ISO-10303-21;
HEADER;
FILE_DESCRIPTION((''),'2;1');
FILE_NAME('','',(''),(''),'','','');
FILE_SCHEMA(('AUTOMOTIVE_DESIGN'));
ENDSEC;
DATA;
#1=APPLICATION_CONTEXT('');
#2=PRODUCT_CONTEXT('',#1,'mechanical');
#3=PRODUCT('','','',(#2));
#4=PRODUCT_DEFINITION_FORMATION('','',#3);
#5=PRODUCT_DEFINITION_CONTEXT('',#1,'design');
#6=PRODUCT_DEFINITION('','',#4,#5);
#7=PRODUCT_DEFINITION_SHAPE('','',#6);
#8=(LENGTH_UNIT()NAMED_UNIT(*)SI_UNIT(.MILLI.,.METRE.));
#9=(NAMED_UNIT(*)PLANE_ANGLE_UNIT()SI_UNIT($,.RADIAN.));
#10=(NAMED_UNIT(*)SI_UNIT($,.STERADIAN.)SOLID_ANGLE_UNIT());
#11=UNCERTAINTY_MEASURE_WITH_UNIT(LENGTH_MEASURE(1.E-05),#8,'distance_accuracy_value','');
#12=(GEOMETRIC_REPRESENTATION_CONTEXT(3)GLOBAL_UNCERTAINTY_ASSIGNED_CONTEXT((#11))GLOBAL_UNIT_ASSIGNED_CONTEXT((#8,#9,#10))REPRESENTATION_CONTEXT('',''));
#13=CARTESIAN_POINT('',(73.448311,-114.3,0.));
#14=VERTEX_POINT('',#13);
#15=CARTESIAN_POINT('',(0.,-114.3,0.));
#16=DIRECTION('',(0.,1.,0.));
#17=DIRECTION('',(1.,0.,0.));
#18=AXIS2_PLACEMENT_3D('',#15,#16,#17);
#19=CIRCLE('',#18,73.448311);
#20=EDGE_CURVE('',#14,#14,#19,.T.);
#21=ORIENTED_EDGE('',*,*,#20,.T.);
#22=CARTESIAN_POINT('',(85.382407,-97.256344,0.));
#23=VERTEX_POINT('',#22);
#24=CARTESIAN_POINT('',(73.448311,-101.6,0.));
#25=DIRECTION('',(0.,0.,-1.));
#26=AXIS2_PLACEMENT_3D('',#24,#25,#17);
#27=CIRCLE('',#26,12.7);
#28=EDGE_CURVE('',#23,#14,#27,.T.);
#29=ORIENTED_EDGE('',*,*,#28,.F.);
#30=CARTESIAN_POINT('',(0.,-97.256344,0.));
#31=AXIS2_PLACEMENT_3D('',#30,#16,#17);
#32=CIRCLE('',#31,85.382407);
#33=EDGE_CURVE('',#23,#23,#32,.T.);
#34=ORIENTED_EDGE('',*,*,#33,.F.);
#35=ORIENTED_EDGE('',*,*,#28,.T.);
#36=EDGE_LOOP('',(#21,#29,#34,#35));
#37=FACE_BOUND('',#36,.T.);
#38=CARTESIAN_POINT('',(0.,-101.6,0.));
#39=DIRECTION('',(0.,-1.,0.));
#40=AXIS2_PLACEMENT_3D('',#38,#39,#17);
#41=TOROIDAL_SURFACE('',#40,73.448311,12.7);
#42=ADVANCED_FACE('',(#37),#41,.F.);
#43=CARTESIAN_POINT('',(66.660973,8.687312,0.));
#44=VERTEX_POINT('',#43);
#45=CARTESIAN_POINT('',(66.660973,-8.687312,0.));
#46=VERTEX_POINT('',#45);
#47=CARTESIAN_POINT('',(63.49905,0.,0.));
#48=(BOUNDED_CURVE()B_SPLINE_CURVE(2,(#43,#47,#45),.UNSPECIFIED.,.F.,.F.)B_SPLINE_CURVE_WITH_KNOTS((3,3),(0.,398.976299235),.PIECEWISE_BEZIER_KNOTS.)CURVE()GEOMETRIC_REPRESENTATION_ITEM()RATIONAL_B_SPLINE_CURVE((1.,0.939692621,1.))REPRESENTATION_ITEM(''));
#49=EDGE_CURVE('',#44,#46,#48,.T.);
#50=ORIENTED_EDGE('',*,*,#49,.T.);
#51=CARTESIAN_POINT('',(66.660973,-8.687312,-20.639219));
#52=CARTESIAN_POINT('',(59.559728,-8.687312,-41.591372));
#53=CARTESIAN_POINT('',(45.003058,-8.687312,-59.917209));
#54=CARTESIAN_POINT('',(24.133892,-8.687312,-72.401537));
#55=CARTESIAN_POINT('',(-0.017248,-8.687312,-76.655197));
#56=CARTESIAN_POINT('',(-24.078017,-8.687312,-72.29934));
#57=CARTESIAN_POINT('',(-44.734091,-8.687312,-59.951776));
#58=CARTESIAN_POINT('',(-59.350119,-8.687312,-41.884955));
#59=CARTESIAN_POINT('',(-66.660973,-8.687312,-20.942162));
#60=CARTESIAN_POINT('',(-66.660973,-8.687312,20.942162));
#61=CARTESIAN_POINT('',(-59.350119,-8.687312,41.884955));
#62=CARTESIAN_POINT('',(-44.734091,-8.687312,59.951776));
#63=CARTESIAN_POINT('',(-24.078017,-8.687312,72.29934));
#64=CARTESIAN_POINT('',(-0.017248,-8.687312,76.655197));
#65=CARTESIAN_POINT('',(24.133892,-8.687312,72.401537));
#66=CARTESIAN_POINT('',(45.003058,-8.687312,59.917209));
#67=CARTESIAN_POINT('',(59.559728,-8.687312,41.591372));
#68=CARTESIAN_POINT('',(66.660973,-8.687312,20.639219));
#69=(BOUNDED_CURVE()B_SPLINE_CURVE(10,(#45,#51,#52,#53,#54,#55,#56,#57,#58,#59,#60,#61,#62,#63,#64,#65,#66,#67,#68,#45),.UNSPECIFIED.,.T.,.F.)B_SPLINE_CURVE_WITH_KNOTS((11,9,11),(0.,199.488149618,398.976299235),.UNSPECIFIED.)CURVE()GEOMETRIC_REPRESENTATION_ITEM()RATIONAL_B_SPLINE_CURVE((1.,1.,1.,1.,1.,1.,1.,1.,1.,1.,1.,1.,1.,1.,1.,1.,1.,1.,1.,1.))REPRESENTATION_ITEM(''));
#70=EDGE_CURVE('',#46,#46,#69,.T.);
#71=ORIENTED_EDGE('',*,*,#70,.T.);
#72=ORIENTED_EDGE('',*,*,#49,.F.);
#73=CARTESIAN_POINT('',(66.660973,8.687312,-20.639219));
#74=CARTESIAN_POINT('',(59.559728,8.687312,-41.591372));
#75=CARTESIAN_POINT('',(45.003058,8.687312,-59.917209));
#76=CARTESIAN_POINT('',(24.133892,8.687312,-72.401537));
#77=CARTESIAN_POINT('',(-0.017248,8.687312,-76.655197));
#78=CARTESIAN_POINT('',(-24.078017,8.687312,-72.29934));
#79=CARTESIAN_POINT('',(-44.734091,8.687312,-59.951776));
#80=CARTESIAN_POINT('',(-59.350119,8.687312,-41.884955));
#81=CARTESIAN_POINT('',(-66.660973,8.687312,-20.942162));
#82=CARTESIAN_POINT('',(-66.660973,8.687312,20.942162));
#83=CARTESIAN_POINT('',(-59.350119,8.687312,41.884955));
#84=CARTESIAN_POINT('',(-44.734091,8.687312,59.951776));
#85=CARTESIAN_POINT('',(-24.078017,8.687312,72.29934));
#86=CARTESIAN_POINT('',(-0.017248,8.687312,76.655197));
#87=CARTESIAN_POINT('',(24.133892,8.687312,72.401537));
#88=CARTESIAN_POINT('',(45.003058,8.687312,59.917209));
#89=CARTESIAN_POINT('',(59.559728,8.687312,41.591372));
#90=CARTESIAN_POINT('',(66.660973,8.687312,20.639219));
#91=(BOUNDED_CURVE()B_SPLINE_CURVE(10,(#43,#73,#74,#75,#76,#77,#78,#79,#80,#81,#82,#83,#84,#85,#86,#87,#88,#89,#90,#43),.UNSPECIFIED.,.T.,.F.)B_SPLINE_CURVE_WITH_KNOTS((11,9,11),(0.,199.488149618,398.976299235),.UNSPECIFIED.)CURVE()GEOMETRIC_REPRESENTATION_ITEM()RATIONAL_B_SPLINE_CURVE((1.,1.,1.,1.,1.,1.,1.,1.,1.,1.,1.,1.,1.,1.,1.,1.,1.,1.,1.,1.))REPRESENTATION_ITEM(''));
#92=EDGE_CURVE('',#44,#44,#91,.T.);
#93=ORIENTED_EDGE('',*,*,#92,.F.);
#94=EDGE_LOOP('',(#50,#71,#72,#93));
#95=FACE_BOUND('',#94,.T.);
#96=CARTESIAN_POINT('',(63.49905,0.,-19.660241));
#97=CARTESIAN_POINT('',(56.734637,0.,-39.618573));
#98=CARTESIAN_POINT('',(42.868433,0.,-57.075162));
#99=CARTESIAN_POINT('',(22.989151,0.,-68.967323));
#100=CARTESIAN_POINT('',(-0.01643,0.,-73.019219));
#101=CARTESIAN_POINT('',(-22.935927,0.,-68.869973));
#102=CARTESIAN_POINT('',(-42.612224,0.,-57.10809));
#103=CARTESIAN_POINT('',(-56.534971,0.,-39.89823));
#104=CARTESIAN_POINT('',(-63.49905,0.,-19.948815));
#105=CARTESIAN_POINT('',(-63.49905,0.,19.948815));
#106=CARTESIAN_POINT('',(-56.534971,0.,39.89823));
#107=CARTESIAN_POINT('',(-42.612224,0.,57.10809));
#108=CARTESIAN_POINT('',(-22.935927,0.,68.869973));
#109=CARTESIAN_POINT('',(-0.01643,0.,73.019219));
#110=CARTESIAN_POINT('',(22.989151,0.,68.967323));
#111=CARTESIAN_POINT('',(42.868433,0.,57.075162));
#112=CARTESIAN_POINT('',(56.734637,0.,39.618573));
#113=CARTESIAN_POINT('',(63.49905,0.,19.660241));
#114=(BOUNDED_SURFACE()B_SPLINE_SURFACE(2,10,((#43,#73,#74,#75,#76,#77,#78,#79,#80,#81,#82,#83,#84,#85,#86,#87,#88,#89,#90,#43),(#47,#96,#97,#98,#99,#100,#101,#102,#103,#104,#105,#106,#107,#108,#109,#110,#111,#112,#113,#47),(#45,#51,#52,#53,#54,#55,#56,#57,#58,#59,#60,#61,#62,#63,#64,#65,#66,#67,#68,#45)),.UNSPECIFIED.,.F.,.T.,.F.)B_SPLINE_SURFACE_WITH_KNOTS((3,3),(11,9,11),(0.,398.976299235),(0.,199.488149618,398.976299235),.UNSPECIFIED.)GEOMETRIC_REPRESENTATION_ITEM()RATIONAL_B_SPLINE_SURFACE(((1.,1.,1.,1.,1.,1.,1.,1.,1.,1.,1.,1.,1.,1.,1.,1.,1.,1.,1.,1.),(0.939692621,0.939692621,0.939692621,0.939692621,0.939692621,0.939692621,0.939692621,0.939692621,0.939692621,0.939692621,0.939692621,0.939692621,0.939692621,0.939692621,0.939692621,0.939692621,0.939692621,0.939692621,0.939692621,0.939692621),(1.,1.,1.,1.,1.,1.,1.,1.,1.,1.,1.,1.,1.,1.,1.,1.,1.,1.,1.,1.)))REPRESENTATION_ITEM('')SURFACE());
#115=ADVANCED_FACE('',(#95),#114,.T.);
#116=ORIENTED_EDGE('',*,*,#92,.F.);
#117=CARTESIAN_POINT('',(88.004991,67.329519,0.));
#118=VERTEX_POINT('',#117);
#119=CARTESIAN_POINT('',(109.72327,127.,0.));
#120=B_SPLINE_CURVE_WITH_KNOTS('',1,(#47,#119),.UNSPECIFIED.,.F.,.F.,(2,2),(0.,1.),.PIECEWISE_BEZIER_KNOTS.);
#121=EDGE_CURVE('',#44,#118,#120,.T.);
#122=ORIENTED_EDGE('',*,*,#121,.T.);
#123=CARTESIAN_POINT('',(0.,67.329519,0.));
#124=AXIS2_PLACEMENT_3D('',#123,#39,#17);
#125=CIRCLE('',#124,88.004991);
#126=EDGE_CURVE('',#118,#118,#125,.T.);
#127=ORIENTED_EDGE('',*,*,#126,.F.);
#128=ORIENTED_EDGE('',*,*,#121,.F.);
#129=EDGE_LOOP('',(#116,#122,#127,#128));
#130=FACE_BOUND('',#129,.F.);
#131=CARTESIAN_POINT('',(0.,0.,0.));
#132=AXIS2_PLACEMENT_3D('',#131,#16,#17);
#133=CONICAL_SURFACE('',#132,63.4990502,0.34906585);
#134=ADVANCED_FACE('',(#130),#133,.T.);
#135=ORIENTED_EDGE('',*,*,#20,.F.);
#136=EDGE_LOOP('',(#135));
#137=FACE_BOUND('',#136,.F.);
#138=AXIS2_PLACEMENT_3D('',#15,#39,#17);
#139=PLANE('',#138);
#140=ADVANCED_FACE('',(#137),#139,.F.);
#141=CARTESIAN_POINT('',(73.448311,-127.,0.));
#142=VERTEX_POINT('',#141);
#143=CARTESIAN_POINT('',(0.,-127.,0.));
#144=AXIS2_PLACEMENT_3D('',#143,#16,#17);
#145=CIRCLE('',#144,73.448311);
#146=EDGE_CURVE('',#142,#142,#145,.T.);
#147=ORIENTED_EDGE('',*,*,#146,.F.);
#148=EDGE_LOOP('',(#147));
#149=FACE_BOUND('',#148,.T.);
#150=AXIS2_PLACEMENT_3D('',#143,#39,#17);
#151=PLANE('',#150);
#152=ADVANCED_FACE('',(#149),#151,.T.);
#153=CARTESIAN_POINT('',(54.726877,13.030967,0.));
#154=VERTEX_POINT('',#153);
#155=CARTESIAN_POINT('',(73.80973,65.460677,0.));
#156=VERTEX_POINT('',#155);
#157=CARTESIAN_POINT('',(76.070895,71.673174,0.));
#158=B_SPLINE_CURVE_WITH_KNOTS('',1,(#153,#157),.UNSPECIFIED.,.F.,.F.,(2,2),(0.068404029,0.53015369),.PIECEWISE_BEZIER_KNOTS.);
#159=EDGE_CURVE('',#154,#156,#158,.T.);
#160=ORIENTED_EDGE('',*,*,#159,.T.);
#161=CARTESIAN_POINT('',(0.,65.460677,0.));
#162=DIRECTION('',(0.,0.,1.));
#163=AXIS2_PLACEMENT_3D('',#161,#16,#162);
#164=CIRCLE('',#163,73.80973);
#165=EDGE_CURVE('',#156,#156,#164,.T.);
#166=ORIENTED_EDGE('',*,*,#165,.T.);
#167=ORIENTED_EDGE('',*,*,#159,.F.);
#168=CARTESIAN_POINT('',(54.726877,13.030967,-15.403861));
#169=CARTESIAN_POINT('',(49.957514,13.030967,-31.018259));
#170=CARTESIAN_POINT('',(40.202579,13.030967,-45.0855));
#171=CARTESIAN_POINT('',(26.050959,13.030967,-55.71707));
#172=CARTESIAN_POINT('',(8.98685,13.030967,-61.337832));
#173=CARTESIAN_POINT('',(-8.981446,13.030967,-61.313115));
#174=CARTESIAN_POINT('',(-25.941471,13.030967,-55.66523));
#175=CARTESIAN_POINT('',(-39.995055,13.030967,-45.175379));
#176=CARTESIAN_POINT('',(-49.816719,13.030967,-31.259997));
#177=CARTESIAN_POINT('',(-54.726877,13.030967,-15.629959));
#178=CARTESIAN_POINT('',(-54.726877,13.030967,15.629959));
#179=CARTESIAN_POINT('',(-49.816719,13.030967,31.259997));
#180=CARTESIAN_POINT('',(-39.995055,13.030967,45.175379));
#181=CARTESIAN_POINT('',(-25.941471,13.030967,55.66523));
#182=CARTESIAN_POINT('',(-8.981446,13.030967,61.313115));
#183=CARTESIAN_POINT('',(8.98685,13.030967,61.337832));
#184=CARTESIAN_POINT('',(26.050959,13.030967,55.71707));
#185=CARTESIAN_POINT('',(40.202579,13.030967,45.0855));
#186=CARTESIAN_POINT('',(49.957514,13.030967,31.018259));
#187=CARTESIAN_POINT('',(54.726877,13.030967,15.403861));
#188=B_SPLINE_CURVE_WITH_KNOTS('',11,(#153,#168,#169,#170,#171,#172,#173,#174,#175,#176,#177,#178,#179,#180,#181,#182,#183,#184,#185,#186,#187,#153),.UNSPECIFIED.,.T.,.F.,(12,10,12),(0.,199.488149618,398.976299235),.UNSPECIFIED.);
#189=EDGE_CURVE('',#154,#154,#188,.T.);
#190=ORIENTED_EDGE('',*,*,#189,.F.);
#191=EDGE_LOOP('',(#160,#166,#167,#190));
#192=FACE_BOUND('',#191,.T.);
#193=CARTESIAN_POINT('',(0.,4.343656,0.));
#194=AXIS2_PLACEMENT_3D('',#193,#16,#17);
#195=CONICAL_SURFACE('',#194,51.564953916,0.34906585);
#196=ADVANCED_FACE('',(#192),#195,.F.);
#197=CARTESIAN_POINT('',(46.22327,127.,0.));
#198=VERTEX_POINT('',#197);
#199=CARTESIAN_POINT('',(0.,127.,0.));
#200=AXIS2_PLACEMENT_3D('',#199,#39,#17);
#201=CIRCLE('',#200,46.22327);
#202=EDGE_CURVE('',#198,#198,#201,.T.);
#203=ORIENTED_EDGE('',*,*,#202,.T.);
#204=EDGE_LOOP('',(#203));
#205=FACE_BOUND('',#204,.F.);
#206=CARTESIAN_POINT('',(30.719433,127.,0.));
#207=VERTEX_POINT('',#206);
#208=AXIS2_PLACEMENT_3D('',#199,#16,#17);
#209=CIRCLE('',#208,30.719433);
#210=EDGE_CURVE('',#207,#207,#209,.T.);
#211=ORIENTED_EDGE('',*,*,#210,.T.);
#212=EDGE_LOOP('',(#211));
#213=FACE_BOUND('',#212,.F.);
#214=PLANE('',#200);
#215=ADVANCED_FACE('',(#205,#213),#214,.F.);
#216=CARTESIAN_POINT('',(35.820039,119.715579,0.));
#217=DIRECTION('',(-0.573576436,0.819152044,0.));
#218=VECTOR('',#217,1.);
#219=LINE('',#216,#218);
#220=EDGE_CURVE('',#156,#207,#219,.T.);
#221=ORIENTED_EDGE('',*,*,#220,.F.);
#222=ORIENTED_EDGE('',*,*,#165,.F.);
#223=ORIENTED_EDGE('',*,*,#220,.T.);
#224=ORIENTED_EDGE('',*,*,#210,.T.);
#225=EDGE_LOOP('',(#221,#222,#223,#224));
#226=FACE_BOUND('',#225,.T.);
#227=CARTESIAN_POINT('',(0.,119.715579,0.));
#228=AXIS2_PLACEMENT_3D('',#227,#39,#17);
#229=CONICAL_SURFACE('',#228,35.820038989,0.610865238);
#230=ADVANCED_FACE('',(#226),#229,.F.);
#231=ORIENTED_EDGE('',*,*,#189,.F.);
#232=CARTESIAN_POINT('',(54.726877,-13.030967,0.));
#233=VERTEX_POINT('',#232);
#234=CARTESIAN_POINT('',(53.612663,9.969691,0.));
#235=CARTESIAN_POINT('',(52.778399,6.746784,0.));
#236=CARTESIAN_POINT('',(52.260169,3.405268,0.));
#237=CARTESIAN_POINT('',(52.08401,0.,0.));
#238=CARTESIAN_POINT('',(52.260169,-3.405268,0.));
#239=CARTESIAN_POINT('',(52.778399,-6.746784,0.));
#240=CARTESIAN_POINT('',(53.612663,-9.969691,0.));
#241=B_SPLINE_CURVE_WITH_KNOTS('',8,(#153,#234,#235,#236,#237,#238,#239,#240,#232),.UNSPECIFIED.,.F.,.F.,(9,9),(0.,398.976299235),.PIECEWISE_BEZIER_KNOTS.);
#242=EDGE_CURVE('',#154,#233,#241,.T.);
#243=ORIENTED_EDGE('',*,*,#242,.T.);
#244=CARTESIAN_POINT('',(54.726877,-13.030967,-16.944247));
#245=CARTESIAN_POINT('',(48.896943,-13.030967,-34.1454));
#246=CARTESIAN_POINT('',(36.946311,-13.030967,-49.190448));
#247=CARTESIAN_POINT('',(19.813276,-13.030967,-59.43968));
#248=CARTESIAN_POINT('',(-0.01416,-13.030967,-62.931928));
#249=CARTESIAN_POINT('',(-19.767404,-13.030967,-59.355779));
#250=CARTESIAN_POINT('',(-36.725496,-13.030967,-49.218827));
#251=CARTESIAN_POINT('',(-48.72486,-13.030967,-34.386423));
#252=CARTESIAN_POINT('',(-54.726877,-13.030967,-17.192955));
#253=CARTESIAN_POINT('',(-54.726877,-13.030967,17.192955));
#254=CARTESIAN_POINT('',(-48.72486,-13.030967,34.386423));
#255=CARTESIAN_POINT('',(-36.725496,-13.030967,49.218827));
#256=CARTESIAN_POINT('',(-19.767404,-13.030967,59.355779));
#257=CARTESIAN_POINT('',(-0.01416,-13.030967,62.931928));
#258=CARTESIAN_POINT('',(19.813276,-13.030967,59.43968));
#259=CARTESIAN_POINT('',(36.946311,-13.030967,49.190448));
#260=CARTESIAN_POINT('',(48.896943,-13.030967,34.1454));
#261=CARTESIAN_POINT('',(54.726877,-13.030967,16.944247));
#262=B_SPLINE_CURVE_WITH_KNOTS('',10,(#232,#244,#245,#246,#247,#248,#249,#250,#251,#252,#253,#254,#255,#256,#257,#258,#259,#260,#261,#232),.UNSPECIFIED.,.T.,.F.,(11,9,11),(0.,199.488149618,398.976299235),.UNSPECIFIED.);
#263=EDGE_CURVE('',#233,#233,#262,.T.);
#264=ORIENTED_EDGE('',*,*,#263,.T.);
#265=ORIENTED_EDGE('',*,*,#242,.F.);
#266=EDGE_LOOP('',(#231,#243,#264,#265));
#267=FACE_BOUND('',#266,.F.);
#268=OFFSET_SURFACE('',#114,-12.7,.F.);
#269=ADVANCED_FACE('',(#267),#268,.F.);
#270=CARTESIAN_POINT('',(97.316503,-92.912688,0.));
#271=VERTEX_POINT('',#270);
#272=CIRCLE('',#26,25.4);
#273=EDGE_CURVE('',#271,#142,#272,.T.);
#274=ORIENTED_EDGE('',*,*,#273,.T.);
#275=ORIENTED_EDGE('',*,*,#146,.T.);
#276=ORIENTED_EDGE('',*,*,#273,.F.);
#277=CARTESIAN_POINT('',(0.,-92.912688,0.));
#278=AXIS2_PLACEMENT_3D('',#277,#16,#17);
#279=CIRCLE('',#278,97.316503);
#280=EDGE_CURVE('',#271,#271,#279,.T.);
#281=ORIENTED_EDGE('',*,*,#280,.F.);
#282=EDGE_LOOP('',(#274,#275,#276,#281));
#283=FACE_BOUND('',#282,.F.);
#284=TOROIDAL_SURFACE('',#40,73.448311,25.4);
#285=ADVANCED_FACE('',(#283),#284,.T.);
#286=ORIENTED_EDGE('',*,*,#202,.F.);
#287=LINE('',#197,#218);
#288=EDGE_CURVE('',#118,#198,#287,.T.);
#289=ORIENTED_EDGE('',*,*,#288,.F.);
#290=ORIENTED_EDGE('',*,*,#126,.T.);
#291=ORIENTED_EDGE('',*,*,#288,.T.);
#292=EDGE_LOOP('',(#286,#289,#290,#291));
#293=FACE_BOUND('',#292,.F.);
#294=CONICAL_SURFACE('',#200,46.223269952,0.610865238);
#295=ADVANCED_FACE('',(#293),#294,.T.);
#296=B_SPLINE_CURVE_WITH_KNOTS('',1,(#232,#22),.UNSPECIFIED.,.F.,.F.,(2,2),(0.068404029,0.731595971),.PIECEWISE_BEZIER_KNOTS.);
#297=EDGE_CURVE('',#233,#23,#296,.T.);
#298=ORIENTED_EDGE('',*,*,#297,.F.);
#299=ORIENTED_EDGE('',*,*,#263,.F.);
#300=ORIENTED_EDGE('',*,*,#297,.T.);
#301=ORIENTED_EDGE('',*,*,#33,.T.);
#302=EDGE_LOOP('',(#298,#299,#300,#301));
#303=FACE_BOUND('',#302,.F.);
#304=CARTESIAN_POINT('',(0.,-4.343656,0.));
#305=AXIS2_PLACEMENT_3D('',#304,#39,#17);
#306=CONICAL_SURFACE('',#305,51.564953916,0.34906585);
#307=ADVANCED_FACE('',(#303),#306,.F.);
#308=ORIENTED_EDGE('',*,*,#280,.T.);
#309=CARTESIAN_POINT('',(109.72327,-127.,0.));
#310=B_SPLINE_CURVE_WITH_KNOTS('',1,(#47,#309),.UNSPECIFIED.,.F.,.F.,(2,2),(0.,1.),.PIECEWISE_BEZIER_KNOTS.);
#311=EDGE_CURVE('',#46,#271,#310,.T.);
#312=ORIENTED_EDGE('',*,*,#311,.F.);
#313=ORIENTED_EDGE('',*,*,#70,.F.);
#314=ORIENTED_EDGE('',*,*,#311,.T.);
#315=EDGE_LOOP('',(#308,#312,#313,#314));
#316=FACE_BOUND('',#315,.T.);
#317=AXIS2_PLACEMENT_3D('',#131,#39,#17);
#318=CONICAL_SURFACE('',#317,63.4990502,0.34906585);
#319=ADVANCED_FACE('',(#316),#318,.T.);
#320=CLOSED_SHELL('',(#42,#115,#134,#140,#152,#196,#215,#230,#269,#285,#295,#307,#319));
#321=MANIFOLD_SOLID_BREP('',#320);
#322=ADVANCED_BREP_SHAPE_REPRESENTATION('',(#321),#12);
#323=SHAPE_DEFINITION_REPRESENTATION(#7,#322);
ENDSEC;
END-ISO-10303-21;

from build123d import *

# Parameters (mm, degrees)
F0_R     = 63.4990501998
F1_DEPTH = 127
F1_TAPER = -20
F2_R     = 25.4
F3_SIZE  = 63.5
F5_T     = -12.7


# Not quite as in the source:
# - a feature of the source that left no trace in its solid (it failed there, or was rolled back) is left out


with BuildPart() as f1:
    # F0 (on Front) → F1 (new body, symmetric)
    with BuildSketch(Plane.XZ):
        Circle(F0_R)
    extrude(amount=F1_DEPTH, both=True, taper=F1_TAPER)

    # F2
    f2_edges = [f1.edges().sort_by_distance(p)[0] for p in [
        (-63.49905, 0, 0),
        (-109.72327, -127, 0),
    ]]
    fillet(f2_edges, radius=F2_R)

    # F3
    f3_edges = [f1.edges().sort_by_distance(p)[0] for p in [
        (-109.72327, 127, 0),
    ]]
    chamfer(f3_edges, length=F3_SIZE)

    # F5
    f5_openings = [f1.faces().sort_by_distance(p)[0] for p in [
        (0, 127, 0),
    ]]
    offset(amount=F5_T, openings=f5_openings)


solid = f1.part
